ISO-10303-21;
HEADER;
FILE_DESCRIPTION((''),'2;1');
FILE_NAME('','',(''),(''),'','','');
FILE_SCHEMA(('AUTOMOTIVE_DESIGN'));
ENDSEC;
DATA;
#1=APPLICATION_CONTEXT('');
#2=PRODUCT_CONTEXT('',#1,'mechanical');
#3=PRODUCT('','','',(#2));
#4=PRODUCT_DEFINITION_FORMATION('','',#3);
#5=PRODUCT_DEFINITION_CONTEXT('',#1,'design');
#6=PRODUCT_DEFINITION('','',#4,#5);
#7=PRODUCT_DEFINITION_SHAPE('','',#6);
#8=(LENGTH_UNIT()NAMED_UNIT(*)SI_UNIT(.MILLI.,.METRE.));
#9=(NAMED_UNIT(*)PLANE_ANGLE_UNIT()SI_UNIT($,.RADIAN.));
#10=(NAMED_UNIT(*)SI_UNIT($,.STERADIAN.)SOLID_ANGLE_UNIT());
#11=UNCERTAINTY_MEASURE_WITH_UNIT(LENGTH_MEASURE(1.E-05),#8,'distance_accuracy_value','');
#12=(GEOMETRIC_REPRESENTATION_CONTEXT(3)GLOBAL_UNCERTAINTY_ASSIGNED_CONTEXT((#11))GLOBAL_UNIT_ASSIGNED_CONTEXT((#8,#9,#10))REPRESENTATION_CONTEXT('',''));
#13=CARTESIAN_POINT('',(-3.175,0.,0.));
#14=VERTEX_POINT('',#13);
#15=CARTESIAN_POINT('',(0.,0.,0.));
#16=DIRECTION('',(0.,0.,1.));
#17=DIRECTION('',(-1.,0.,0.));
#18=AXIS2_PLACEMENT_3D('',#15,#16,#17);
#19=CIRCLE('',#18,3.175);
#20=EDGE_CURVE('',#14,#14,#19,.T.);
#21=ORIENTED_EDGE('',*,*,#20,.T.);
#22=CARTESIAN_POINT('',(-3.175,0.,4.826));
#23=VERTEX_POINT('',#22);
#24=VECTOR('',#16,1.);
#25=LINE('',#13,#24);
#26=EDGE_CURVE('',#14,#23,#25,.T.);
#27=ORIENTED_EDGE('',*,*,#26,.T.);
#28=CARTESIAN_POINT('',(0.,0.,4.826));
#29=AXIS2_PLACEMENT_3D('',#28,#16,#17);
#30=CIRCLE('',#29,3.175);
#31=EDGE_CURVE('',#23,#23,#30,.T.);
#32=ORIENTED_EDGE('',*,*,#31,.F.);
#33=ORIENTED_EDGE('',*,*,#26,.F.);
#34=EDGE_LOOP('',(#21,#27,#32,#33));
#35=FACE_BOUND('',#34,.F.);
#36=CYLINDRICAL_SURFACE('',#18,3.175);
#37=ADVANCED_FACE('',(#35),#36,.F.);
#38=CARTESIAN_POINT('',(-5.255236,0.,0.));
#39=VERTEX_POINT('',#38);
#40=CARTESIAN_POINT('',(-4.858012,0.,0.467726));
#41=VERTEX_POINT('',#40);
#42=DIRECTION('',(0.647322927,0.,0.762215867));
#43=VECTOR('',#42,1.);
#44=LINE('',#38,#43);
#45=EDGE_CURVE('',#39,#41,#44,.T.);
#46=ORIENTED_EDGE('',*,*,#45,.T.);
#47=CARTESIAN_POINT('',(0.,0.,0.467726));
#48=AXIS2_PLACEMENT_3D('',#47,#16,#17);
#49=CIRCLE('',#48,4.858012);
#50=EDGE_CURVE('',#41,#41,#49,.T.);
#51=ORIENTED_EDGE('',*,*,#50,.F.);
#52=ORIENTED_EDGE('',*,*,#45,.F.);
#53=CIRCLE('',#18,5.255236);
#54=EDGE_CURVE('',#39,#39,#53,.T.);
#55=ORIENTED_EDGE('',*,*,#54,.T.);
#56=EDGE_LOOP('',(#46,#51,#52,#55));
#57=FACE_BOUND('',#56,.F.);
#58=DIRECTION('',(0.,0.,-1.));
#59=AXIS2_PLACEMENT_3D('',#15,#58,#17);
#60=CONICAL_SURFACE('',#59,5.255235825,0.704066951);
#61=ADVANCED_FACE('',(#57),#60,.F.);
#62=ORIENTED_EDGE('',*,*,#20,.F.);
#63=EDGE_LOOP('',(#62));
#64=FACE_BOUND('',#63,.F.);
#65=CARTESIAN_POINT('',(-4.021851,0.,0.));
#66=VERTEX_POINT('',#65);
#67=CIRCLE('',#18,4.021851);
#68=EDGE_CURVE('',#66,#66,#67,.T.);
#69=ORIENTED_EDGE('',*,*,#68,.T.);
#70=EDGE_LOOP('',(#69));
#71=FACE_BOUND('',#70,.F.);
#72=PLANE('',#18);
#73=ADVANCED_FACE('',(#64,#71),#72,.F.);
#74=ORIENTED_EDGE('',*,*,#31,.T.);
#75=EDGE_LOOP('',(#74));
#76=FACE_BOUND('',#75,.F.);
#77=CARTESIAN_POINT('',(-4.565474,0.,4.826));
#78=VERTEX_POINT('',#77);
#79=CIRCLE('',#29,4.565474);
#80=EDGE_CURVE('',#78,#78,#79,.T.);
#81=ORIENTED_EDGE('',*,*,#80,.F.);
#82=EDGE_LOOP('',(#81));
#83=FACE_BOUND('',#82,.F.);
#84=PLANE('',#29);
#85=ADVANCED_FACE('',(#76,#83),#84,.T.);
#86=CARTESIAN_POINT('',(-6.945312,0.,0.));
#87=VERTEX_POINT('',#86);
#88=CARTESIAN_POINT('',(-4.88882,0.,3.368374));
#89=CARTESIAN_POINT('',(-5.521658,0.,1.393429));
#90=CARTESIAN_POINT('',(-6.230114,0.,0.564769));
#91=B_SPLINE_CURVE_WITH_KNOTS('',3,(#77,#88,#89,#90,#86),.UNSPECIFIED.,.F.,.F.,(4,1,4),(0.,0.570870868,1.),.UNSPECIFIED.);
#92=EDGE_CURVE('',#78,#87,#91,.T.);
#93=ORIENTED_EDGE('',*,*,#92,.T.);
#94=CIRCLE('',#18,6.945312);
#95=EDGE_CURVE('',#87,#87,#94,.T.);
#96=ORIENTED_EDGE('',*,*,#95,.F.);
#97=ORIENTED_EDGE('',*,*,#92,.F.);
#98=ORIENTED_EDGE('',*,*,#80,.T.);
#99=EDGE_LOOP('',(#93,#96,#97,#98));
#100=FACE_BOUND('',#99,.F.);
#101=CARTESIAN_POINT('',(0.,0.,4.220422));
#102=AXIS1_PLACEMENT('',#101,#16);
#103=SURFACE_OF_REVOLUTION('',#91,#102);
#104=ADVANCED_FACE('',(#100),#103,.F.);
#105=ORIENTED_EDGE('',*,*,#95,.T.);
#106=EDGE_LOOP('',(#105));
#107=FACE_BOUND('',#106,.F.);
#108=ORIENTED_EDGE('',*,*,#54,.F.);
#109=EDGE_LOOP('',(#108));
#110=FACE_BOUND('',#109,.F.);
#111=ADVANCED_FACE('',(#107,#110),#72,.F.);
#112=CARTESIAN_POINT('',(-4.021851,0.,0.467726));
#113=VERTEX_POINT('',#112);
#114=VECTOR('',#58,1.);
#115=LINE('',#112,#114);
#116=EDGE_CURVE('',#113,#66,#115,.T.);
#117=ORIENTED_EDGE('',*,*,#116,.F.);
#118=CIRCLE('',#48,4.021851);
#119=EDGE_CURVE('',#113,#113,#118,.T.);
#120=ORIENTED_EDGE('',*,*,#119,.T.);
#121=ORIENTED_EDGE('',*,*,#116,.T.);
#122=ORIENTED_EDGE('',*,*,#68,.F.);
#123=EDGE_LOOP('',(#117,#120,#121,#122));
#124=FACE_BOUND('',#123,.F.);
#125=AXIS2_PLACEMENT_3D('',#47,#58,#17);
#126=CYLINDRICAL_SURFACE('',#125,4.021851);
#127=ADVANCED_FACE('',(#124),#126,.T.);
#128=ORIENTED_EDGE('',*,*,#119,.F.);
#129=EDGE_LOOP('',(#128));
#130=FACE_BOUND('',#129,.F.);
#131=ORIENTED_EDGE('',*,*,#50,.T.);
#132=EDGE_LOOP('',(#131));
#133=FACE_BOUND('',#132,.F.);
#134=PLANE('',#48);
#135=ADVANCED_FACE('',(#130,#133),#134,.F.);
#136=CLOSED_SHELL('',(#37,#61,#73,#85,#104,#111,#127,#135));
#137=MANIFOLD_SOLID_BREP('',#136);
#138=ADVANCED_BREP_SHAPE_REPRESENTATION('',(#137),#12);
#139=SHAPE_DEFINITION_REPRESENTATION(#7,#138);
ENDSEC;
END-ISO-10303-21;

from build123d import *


with BuildPart() as f1:
    # F0 (on Front) → F1 (revolve)
    with BuildSketch(Plane.XZ):
        with BuildLine():
            Line((-3.175, 0), (-3.175, 4.826))
            Line((-3.175, 4.826), (-4.5654736459, 4.826))
            add(Edge.make_bspline(
                [(-4.5654736459, 4.826), (-4.8888199963, 3.3683741931), (-5.5216582711, 1.3934291844), (-6.2301136902, 0.564768836), (-6.9453125, 0)],
                knots=[0, 0, 0, 0, 0.5708708677, 1, 1, 1, 1], degree=3))
            Line((-6.9453125, 0), (-5.2552358247, 0))
            Line((-5.2552358247, 0), (-4.8580123112, 0.467726466))
            Line((-4.8580123112, 0.467726466), (-4.0218508802, 0.467726466))
            Line((-4.0218508802, 0.467726466), (-4.0218508802, 0))
            Line((-4.0218508802, 0), (-3.175, 0))
        make_face()
    revolve(axis=Axis((0, 0, 4.2204221714), (0, 0, 1)))


solid = f1.part
